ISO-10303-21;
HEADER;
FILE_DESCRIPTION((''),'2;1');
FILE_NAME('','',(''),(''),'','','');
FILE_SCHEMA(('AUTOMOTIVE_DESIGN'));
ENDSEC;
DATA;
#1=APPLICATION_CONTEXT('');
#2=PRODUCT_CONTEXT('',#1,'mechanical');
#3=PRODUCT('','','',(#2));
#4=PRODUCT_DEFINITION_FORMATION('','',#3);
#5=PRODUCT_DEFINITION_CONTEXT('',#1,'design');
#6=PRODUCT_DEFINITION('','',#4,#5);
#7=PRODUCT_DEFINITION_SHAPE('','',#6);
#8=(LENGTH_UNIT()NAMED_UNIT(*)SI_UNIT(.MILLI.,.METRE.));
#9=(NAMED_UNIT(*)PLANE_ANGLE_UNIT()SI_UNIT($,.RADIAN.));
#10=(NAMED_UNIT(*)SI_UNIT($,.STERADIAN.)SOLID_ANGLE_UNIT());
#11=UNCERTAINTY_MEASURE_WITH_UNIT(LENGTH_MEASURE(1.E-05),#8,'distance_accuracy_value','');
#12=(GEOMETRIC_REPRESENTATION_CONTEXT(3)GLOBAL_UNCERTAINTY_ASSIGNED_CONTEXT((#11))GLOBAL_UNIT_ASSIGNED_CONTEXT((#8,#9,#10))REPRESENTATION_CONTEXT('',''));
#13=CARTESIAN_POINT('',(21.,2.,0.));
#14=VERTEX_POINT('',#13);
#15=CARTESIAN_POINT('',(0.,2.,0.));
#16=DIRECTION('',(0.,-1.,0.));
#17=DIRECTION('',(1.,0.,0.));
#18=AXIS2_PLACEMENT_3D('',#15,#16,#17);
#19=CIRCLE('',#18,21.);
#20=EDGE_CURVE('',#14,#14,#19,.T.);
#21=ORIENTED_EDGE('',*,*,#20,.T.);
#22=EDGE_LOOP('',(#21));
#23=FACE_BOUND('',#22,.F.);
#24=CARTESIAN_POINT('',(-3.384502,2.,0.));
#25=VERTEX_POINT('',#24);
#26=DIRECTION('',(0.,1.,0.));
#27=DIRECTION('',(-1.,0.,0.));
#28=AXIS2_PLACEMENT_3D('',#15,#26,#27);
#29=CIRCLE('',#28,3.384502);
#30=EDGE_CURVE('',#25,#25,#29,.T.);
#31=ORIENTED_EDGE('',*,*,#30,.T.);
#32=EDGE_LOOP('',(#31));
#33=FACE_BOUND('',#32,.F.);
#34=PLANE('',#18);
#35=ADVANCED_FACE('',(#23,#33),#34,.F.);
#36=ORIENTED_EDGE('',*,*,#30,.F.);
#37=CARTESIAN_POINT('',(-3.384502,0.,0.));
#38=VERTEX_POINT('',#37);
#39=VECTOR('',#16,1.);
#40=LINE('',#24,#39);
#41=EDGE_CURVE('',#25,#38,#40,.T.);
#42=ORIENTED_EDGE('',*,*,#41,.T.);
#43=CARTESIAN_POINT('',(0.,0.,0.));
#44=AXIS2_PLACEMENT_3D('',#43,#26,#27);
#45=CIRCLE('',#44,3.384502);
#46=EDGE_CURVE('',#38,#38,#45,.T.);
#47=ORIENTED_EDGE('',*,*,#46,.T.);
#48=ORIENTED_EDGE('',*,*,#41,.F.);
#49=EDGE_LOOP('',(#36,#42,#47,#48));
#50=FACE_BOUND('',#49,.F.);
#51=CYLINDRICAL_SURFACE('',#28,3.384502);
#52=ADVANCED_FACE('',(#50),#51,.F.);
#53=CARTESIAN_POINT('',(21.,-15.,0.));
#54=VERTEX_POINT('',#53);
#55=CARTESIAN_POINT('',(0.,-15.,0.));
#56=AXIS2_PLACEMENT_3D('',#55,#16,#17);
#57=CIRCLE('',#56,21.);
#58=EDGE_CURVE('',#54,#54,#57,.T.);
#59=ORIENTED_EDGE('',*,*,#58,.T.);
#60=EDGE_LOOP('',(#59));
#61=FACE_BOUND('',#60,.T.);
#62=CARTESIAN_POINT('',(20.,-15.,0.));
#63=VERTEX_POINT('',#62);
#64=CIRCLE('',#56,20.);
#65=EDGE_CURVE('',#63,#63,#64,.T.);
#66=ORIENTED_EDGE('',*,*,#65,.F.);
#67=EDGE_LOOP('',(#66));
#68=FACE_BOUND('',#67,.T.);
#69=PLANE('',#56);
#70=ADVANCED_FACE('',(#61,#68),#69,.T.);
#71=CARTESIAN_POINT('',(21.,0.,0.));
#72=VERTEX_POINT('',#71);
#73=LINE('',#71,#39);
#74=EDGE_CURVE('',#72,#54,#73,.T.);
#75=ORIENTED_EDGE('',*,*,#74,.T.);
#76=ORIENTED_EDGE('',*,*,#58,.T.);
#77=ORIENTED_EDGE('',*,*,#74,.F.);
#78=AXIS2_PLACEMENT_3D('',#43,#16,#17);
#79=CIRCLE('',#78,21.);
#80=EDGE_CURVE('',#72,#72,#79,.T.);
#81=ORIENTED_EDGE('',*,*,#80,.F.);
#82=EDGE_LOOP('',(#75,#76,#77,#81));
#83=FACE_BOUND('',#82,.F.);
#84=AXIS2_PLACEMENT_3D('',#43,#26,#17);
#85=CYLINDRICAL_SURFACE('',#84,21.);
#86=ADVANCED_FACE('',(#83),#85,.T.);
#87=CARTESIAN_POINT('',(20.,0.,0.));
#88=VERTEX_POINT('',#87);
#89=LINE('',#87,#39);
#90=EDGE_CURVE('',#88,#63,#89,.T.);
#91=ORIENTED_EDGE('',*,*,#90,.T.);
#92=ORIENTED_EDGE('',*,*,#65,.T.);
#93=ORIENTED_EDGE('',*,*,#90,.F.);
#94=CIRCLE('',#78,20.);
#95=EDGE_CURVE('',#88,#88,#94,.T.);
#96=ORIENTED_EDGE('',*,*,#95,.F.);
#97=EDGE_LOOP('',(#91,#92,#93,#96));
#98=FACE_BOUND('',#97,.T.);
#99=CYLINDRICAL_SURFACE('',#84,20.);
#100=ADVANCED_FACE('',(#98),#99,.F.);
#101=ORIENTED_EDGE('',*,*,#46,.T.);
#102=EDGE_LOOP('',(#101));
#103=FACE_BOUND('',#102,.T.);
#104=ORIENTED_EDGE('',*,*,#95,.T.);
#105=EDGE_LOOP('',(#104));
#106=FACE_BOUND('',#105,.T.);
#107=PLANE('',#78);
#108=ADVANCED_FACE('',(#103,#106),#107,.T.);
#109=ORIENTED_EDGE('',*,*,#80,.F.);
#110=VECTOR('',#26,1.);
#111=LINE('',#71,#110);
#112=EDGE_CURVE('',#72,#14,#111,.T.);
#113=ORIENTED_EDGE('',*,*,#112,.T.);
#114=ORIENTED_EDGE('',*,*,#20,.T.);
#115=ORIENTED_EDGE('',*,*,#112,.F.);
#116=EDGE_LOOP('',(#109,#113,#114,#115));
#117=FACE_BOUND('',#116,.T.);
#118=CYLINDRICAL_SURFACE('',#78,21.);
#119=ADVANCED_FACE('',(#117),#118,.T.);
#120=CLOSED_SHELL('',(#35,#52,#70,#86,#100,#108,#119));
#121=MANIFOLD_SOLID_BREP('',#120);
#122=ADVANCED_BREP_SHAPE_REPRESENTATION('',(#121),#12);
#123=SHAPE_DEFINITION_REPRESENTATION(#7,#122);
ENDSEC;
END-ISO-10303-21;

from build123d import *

# Parameters (mm, degrees)
F0_R     = 21
F0_R_2   = 20
F1_DEPTH = 2
F2_R     = 21
F2_R_2   = 20
F3_DEPTH = 15
F4_R     = 3.3845023637
F5_DEPTH = 25


# Not quite as in the source:
# - a feature names something its author has since deleted; it is built from what else it names


with BuildPart() as f1:
    # F0 (on Front) → F1 (new body)
    with BuildSketch(Plane.XZ):
        Circle(F0_R)
        Circle(F0_R_2, mode=Mode.SUBTRACT)
        Circle(F0_R_2)
    extrude(amount=-F1_DEPTH)

    # F2 (on face) → F3 (join)
    with BuildSketch(Plane.XZ):
        Circle(F2_R)
        Circle(F2_R_2, mode=Mode.SUBTRACT)
    extrude(amount=F3_DEPTH)

    # F4 (on face) → F5 (cut)
    with BuildSketch(Plane(origin=(0, 2, 0), x_dir=(-1, 0, 0), z_dir=(0, 1, 0))):
        Circle(F4_R)
    extrude(amount=-F5_DEPTH, mode=Mode.SUBTRACT)


solid = f1.part
